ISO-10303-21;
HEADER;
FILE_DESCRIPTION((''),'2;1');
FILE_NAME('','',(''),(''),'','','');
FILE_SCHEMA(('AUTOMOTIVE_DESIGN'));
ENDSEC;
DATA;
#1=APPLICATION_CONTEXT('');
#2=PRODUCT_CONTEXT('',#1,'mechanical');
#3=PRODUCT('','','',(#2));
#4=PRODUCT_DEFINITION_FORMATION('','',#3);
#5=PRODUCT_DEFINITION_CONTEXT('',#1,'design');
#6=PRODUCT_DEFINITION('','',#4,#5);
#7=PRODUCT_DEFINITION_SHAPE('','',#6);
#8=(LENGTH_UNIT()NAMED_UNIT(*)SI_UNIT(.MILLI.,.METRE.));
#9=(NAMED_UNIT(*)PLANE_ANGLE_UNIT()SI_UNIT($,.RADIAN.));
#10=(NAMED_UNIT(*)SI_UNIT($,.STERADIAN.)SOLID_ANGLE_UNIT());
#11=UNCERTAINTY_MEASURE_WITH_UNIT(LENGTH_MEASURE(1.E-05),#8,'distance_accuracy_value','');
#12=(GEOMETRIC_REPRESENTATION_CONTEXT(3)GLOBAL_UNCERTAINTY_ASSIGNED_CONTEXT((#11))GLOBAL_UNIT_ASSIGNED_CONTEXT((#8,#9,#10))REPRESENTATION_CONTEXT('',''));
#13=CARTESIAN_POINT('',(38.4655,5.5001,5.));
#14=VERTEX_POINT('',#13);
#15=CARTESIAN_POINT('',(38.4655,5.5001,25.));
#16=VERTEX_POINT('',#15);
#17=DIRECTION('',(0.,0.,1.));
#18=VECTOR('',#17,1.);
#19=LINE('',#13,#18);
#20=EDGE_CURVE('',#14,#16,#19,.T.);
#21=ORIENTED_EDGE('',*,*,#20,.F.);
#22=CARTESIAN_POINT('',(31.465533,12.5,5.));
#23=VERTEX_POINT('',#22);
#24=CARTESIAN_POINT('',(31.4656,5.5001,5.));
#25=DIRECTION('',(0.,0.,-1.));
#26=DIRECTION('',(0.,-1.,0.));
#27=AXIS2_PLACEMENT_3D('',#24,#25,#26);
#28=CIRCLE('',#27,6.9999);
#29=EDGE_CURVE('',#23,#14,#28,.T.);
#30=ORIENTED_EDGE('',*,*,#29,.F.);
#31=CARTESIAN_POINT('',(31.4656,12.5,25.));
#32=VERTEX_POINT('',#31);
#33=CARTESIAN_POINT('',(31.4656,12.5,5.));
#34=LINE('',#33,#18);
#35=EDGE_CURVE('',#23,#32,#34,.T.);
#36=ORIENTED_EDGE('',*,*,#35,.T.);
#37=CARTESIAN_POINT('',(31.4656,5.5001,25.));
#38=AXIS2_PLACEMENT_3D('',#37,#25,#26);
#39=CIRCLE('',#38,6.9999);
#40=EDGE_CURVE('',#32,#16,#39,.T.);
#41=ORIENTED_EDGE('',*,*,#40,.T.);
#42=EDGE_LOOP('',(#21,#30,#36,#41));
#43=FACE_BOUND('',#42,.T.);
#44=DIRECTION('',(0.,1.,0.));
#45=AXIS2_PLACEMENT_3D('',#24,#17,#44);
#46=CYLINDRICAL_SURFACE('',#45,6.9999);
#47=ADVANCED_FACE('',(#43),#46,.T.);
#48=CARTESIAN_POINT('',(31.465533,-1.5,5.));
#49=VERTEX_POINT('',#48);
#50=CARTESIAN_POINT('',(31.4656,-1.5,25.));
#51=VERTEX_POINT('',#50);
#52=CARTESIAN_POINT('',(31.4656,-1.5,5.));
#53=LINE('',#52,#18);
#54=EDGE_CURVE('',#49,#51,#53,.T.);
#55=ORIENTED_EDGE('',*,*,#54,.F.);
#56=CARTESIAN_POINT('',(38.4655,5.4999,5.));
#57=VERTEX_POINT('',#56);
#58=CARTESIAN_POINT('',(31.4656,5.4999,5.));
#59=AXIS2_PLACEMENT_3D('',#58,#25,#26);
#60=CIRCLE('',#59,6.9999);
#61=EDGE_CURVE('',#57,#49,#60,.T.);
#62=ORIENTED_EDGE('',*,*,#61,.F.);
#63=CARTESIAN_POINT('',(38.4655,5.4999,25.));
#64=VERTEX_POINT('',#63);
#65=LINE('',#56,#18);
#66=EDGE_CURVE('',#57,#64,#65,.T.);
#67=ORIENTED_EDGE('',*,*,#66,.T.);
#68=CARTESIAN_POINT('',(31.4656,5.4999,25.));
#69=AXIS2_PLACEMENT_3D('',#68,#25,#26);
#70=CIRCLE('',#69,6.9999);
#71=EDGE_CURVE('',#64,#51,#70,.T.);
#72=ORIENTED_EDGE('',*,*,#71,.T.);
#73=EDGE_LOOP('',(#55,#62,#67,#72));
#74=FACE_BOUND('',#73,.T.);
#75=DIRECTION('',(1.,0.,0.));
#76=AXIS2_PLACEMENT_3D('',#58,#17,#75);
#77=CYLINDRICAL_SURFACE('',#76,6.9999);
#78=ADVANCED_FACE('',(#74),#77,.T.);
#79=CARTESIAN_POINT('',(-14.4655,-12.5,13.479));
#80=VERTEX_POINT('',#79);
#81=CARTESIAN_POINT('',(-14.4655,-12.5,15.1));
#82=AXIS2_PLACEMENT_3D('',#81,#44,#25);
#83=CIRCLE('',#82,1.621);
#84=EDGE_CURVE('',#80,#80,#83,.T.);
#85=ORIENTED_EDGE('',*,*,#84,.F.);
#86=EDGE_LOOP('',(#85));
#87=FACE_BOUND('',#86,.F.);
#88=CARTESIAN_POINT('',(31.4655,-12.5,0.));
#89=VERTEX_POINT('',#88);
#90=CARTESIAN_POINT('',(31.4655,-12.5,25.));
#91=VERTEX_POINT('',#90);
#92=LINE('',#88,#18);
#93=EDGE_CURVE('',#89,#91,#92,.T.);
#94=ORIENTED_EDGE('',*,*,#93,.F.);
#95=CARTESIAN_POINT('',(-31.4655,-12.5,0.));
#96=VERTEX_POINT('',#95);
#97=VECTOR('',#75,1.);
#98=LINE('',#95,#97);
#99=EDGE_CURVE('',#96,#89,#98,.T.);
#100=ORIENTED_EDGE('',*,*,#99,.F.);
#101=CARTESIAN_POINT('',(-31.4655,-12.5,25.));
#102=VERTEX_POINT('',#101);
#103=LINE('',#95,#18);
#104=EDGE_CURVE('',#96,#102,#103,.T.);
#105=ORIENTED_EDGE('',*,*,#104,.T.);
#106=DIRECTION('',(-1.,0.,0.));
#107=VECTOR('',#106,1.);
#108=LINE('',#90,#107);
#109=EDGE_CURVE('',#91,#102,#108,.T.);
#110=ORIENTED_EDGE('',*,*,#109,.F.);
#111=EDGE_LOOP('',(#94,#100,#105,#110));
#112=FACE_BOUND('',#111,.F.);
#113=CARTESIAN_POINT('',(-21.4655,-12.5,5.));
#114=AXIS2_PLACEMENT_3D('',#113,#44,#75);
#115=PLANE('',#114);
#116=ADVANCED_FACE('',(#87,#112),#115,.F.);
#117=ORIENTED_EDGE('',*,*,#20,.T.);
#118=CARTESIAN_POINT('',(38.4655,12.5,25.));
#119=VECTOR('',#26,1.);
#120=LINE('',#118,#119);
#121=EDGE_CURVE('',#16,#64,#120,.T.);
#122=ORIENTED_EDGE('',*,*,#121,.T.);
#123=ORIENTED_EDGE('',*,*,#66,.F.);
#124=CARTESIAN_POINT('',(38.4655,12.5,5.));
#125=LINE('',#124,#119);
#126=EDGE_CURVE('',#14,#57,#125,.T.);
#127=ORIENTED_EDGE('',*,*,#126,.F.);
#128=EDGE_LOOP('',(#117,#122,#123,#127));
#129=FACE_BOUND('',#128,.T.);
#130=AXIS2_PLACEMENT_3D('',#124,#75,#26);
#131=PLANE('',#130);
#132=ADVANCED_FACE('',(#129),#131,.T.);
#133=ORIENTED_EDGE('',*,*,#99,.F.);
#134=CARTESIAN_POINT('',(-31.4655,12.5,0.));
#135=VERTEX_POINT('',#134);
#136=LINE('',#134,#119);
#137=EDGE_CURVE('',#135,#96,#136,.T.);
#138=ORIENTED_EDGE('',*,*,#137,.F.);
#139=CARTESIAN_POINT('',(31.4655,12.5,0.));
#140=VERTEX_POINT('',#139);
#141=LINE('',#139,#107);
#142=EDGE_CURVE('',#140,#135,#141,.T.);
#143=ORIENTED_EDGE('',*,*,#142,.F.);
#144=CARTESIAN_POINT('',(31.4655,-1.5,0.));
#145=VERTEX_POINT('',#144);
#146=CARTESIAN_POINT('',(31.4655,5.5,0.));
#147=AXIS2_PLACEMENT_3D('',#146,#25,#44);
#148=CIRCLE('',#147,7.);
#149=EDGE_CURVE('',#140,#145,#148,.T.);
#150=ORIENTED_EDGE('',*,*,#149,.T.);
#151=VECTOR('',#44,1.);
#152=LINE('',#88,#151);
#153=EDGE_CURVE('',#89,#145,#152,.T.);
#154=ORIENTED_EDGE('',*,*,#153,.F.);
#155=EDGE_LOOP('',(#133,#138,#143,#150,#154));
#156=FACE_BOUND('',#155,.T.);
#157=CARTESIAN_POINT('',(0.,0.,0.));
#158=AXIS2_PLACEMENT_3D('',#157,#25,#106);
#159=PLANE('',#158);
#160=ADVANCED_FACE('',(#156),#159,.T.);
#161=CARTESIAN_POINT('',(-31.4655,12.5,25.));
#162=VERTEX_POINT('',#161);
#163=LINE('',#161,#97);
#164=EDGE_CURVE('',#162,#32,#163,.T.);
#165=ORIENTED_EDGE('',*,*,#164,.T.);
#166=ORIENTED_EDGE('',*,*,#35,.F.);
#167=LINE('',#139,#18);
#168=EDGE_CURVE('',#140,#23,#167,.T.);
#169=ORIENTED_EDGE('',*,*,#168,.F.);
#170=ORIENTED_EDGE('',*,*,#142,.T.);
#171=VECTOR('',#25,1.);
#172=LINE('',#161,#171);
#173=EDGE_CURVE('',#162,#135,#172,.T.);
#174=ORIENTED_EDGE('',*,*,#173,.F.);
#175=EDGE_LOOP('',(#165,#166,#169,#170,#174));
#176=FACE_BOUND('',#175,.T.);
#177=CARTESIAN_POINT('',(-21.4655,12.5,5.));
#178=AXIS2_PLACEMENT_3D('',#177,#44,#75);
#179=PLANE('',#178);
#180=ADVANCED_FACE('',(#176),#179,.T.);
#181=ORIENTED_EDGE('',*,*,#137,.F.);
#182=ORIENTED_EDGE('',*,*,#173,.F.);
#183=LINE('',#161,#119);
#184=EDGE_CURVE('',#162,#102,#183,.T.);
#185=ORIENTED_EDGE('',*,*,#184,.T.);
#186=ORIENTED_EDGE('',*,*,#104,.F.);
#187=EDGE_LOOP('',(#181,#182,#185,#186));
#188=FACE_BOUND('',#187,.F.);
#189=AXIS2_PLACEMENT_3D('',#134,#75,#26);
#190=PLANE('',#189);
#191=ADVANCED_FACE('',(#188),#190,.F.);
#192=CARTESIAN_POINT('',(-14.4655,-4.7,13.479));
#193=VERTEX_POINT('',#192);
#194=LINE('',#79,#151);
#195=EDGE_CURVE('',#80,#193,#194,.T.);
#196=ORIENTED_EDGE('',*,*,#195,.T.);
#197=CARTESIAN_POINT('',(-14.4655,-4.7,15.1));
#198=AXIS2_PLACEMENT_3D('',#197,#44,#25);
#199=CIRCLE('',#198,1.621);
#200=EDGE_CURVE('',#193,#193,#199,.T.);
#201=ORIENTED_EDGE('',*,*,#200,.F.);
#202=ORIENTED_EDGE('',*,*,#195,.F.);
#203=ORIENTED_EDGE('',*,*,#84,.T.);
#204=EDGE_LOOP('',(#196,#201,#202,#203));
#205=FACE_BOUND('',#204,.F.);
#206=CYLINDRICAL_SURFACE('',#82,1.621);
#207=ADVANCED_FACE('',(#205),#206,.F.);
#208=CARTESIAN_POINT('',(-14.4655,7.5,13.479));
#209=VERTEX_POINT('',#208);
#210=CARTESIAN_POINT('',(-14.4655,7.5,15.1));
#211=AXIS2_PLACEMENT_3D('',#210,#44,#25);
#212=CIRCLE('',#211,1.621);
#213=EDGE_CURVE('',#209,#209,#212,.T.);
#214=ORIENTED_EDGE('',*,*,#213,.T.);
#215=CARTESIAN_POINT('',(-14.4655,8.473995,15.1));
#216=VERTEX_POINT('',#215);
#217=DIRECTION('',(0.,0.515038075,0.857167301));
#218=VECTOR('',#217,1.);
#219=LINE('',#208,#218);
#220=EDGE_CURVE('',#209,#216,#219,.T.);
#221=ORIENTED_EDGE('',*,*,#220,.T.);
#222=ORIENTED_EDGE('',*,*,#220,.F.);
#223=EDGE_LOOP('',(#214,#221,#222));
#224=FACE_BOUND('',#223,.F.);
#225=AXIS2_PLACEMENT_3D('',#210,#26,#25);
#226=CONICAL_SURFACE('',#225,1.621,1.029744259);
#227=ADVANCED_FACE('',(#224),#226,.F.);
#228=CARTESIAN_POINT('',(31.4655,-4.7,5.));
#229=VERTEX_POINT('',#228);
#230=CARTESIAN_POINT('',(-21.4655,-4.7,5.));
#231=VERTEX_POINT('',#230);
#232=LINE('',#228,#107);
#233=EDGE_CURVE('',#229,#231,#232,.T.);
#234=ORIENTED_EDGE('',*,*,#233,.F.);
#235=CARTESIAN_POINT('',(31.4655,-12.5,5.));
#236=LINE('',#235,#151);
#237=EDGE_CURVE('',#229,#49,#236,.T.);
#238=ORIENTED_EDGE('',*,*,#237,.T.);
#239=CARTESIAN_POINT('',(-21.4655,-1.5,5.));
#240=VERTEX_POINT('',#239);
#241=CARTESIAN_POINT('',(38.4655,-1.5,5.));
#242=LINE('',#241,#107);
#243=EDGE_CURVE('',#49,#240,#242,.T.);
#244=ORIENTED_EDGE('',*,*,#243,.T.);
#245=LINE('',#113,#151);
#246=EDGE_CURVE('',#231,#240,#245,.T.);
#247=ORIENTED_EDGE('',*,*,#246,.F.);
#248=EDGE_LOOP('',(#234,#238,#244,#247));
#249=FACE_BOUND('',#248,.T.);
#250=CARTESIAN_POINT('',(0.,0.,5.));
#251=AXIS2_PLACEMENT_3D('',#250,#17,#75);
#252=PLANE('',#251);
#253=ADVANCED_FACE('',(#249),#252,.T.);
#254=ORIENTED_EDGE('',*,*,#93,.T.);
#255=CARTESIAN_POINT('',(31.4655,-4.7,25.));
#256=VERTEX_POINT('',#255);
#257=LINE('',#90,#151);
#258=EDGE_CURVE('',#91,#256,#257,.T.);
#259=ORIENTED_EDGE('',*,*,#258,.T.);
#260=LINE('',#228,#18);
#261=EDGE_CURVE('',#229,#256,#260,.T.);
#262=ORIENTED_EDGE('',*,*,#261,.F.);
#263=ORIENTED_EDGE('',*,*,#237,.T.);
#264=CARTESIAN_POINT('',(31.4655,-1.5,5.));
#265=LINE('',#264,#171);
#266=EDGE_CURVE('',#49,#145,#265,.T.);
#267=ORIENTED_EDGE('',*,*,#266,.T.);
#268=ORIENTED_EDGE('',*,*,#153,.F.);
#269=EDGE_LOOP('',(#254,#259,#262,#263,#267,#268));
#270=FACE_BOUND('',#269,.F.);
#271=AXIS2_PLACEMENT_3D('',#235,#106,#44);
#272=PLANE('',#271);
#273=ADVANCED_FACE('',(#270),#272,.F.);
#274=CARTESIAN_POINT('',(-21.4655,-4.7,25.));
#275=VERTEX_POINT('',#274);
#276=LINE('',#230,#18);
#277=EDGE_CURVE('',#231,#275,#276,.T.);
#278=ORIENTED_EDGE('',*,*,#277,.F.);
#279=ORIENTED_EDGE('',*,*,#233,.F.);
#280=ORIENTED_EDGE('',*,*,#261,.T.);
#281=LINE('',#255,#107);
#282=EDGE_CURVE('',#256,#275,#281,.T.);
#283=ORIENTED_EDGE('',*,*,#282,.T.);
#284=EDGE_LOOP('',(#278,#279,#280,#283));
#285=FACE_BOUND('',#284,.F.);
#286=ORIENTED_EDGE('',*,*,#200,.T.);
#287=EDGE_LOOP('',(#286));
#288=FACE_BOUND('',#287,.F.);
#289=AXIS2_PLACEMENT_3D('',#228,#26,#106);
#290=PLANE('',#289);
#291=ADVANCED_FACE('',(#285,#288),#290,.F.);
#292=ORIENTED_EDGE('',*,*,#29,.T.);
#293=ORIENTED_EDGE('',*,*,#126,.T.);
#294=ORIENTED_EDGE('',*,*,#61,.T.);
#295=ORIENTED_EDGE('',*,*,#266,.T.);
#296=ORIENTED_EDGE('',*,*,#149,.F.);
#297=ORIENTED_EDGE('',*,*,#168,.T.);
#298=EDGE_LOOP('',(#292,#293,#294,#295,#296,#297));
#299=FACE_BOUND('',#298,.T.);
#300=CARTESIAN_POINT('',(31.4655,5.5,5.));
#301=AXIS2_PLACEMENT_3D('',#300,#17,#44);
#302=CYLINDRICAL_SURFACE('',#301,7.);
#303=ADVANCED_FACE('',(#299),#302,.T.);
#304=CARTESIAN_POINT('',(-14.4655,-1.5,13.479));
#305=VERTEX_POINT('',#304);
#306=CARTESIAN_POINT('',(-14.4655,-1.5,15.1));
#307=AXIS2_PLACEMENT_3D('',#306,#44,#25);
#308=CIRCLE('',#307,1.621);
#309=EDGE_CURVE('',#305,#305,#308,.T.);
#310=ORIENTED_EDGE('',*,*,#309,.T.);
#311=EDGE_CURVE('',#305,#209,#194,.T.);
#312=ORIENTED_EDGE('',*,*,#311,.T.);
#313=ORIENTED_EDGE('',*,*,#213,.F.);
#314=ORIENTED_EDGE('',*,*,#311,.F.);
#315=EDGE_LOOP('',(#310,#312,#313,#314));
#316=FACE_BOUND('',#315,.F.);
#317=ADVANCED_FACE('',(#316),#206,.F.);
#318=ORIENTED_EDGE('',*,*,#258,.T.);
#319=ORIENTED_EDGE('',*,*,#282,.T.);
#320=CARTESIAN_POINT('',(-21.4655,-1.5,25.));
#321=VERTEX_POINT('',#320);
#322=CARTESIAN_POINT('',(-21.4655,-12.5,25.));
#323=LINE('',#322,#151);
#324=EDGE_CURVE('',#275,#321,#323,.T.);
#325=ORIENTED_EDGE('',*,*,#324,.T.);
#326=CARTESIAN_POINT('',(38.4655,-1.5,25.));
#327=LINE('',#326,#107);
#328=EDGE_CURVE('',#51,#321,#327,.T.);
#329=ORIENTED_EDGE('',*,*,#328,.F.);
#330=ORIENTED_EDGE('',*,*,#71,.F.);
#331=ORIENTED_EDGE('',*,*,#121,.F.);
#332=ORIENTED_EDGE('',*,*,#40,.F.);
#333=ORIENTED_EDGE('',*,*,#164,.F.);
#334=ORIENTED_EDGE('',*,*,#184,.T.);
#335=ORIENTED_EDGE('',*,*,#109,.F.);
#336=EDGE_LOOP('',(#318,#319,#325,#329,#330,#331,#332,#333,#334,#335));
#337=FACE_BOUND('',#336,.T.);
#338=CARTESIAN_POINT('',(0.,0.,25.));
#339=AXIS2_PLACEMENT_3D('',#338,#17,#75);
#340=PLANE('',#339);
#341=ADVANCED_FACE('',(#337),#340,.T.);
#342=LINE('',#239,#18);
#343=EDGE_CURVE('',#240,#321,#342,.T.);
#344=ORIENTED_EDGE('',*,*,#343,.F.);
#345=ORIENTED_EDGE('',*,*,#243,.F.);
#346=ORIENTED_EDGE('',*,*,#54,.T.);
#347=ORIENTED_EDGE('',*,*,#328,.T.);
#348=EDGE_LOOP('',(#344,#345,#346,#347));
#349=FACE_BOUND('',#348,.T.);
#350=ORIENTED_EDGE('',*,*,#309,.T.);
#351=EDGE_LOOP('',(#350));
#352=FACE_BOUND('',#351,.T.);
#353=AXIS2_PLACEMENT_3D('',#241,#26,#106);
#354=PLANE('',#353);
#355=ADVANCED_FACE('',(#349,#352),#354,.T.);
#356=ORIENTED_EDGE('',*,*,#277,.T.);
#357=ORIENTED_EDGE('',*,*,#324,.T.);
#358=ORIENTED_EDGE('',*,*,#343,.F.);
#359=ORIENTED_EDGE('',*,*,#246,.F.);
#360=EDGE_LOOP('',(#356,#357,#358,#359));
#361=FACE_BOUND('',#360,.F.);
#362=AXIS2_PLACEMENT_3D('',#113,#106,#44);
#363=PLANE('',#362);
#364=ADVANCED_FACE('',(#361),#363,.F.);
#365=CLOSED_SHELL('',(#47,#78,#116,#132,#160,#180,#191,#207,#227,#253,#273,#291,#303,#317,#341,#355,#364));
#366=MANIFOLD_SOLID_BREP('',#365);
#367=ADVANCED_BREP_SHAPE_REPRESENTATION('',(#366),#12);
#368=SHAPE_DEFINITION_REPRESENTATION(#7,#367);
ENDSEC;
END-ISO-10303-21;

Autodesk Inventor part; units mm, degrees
ref_plane "YZ Plane" through (0, 0, 0) normal (1, 0, 0) x (0, 1, 0)
ref_plane "XZ Plane" through (0, 0, 0) normal (0, 1, 0) x (-1, 0, 0)
ref_plane "XY Plane" through (0, 0, 0) normal (0, 0, 1) x (1, 0, 0)
sketch "Skizze8" plane through (0, 0, 0) normal (0, 0, 1) x (1, 0, 0)
  line L0 (-31.4655, -12.5) -> (31.4655, -12.5)
  line L1 (31.4655, -12.5) -> (31.4655, 12.5)
  line L2 (31.4655, 12.5) -> (-31.4655, 12.5)
  line L3 (-31.4655, 12.5) -> (-31.4655, -12.5)
  line L4 (-31.4655, -12.5) -> (31.4655, 12.5) construction
  line L5 (31.4655, -12.5) -> (-31.4655, 12.5) construction
  point P0 (0, 0)
  dimension "d28" = 62.931
  dimension "d29" = 25
extrude "Extrusion7" add sketch "Skizze8" along normal blind 5
sketch "Skizze9" plane through (0, 0, 5) normal (0, 0, 1) x (1, 0, 0)
  line L0 (31.4655, 12.5) -> (-31.4655, 12.5) projected
  line L1 (-31.4655, 12.5) -> (-31.4655, -12.5) projected
  line L2 (-31.4655, -12.5) -> (-21.4655, -12.5)
  line L3 (-21.4655, -12.5) -> (-21.4655, 12.5)
  line L4 (-21.4655, 12.5) -> (-31.4655, 12.5)
  line L5 (-31.4655, 12.5) -> (-31.4655, -12.5)
  point P0 (0, 0)
  dimension "d32" = 10
extrude "Extrusion8" add sketch "Skizze9" along normal blind 20
sketch "Skizze10" plane through (0, 0, 5) normal (0, 0, 1) x (1, 0, 0)
  line L0 (-21.4655, 12.5) -> (38.4655, 12.5)
  line L1 (38.4655, 12.5) -> (38.4655, -1.5)
  line L2 (38.4655, -1.5) -> (-21.4655, -1.5)
  line L3 (-21.4655, -1.5) -> (-21.4655, 12.5)
  point P0 (0, 0)
  dimension "d35" = 59.931
  dimension "d36" = 14
extrude "Extrusion9" add sketch "Skizze10" along normal blind 20
fillet "Rundung4" radius 7 2 edges at (38.4655, 12.5, 15) (38.4655, -1.5, 15)
sketch "Skizze11" plane through (0, 0, 5) normal (0, 0, 1) x (1, 0, 0)
  line L0 (31.4655, -12.5) -> (31.4655, -1.5) projected
  line L1 (-21.4655, -12.5) -> (31.4655, -12.5)
  line L2 (31.4655, -12.5) -> (31.4655, -4.7)
  line L3 (31.4655, -4.7) -> (-21.4655, -4.7)
  line L4 (-21.4655, -4.7) -> (-21.4655, -12.5)
  point P0 (0, 0)
  dimension "d40" = 7.8
extrude "Extrusion10" add sketch "Skizze11" along normal blind 20
sketch "Skizze12" plane through (-31.4655, -12.5, 0) normal (0, -1, 0) x (1, 0, 0)
  line L0 (0, 25) -> (62.931, 25) projected
  line L1 (10, 25) -> (10, 5) projected
  point P0 (31.4655, 0)
  point P1 (17, 15.1)
  dimension "d43" = 7
  dimension "d44" = 9.9
hole "Bohrung1" at (-14.4655, -12.5, 15.1) direction (0, 1, 0) diameter 3.242 depth 20 tip angle 118 thread size "M4x0.7" class "6H" standard "ANSI Metric M Profile"
sketch "Skizze13" plane through (0, 0, 5) normal (0, 0, -1) x (-1, 0, 0)
  arc A0 (-31.4655, 12.5) -> (-31.4655, -1.5) centre (-31.4655, 5.5) ccw projected
  line L0 (-31.4655, -1.5) -> (-31.4655, 12.5) projected
  line L1 (-31.4655, -12.5) -> (-31.4655, 12.5) projected
  point P0 (0, 0)
extrude "Extrusion11" add sketch "Skizze13" along normal blind 5
properties part number "Standard (DIN)"
